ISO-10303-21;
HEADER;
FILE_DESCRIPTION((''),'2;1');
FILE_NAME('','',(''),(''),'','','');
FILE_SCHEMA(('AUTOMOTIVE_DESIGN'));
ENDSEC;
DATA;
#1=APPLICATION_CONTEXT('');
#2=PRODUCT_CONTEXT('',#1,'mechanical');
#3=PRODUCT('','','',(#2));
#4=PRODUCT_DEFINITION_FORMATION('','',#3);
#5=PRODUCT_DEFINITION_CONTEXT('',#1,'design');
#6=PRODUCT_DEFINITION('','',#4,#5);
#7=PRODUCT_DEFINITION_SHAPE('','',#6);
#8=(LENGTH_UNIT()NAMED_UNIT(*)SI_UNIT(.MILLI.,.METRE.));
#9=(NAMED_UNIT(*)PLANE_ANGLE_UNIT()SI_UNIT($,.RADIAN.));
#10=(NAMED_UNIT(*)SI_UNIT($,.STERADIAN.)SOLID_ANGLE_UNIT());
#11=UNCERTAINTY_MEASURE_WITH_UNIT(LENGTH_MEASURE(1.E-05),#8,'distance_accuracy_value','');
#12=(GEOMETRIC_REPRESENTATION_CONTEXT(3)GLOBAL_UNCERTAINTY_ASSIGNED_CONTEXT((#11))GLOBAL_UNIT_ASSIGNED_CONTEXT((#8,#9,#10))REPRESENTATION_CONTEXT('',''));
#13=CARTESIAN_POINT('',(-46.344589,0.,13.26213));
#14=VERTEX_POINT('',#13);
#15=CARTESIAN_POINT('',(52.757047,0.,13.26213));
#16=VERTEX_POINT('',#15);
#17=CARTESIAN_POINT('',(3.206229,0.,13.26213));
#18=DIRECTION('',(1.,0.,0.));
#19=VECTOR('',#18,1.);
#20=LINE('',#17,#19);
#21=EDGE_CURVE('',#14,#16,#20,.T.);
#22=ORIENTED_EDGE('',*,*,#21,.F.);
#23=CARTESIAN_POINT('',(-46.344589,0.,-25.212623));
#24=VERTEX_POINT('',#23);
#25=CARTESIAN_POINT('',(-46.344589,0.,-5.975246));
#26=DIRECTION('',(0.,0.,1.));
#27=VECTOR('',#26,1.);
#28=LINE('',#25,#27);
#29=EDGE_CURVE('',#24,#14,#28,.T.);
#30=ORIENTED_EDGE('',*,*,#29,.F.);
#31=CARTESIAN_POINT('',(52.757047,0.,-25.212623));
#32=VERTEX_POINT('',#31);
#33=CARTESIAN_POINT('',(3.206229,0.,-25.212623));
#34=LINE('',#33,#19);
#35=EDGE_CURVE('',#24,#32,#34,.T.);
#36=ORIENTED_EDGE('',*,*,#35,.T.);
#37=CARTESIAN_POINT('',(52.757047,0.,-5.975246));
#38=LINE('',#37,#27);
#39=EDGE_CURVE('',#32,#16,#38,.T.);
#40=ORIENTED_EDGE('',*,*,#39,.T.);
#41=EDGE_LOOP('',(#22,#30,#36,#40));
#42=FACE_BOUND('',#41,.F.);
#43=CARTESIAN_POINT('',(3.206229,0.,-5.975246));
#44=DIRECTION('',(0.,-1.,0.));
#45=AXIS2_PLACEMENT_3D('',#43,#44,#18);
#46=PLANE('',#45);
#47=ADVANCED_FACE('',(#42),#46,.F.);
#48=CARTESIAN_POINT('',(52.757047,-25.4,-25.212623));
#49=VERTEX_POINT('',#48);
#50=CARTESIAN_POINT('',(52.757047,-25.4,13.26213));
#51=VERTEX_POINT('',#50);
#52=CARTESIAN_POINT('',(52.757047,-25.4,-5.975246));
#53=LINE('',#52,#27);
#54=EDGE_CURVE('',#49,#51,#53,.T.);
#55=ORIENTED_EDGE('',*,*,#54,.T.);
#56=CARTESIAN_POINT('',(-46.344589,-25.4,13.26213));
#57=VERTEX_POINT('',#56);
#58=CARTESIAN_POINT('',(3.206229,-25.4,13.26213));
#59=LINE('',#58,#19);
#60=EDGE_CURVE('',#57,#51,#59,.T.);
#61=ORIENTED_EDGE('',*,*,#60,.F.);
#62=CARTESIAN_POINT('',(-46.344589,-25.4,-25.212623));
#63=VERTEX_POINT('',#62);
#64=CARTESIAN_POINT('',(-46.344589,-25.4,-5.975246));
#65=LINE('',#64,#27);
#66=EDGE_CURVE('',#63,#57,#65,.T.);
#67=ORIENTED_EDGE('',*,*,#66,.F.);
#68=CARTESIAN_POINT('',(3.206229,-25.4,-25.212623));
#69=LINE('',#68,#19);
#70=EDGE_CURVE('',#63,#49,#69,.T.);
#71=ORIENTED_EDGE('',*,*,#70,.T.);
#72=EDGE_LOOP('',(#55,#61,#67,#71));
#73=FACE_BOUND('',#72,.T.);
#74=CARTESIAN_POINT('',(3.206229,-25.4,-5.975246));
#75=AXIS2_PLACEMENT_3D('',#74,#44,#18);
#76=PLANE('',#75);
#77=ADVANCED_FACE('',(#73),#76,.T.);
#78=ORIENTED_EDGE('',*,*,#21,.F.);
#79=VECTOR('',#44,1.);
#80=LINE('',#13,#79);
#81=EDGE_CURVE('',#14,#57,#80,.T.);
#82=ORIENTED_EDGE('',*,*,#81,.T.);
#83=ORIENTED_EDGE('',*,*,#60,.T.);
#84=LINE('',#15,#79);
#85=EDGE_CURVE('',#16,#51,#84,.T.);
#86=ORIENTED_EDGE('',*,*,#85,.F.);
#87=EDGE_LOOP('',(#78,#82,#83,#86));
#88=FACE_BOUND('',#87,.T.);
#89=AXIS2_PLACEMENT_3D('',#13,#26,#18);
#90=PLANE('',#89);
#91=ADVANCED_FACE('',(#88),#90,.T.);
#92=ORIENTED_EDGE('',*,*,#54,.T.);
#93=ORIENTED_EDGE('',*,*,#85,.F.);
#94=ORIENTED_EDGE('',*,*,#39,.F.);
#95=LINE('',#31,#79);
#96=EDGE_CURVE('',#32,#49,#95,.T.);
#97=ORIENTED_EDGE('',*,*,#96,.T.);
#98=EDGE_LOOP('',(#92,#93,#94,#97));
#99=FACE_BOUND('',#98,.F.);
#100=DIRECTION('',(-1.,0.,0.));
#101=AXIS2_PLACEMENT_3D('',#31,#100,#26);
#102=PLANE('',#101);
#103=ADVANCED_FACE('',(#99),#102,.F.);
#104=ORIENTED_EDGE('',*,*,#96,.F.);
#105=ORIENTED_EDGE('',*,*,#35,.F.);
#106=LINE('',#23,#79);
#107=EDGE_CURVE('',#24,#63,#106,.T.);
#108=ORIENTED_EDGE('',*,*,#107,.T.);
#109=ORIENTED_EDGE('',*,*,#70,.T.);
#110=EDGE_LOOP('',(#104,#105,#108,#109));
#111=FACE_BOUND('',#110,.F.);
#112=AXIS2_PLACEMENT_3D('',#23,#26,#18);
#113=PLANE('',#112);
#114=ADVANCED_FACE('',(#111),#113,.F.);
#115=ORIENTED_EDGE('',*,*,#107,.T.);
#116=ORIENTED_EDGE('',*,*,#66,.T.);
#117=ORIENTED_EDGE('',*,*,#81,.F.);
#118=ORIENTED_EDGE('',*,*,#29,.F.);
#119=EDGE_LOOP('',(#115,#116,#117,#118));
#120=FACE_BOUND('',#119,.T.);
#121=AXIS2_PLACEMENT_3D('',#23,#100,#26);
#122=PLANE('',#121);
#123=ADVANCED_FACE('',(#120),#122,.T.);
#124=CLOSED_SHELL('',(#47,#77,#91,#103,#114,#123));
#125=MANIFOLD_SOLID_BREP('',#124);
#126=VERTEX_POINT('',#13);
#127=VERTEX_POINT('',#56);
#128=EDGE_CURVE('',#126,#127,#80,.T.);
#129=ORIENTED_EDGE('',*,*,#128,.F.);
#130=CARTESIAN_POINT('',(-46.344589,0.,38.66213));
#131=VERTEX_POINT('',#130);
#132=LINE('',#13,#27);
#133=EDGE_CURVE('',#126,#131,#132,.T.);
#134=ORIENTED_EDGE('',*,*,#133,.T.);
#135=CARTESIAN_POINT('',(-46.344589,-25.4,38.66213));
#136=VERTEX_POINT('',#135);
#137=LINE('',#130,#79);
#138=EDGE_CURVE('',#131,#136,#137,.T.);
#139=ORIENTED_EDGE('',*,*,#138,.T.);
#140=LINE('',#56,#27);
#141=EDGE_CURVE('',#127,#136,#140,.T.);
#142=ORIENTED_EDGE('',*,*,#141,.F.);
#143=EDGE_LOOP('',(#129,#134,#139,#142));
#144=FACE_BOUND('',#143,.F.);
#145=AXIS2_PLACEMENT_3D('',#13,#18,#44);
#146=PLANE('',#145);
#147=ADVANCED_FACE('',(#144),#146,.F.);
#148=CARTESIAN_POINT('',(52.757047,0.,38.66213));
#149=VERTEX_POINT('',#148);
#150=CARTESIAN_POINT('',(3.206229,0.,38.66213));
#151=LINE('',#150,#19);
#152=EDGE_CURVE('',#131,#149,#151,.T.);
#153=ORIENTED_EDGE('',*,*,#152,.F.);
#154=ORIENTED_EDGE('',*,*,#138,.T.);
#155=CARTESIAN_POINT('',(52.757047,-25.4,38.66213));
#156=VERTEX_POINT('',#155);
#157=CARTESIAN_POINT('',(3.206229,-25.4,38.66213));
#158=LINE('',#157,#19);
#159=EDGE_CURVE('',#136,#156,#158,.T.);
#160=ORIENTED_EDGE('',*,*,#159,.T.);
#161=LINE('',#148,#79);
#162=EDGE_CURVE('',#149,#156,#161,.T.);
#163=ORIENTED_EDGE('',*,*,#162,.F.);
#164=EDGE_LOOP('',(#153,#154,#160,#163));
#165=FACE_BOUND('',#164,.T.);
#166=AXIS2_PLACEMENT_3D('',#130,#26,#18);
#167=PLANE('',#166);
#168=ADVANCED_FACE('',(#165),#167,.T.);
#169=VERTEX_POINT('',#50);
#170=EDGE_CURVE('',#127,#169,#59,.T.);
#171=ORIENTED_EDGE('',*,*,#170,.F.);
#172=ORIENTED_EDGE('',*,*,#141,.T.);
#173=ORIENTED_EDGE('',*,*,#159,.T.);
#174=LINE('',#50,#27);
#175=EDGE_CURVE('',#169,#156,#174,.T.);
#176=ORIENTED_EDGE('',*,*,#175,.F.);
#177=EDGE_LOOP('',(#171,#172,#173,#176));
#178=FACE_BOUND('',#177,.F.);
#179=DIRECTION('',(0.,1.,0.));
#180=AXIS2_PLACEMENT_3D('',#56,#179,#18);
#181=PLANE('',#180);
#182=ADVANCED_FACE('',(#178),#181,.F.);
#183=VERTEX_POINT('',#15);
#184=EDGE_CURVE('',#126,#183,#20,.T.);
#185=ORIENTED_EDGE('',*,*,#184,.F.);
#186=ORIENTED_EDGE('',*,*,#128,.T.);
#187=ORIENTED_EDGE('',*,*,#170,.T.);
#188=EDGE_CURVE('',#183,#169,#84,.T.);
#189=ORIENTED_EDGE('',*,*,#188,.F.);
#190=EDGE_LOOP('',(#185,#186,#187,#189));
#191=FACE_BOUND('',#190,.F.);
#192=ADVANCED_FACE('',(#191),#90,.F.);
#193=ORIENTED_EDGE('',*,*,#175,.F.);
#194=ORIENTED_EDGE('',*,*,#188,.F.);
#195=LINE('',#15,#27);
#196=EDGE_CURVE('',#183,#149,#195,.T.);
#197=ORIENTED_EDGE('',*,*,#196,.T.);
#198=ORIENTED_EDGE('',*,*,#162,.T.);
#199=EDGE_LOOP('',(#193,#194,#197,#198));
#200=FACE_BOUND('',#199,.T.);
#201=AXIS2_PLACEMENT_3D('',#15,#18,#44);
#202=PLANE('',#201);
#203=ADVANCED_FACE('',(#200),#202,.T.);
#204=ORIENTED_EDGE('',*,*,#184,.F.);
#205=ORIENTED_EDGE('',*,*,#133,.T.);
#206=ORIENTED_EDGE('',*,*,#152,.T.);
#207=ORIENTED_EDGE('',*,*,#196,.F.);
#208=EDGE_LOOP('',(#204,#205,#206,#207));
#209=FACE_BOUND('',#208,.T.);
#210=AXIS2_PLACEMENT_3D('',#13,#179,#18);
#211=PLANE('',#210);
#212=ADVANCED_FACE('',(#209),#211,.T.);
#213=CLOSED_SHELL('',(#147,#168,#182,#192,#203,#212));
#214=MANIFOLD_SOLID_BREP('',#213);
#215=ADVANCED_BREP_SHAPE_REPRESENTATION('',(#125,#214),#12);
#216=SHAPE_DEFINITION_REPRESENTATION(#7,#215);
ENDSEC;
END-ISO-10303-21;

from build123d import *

# Parameters (mm, degrees)
F0_W     = 99.1016365588
F0_H     = 38.474753499
F1_DEPTH = 25.4
F2_DEPTH = 25.4


# Not quite as in the source:
# - a feature of the source that left no trace in its solid (it failed there, or was rolled back) is left out


with BuildPart() as f1:
    # F0 (on Front) → F1 (new body)
    with BuildSketch(Plane.XZ):
        with Locations((3.2062288374, -5.9752464294)):
            Rectangle(F0_W, F0_H)
    extrude(amount=F1_DEPTH)


with BuildPart() as f2:
    # F2 (new): a face of the model
    f2_faces = [f1.part.faces().sort_by_distance(p)[0] for p in [
        (3.2062288374, -12.7, 13.2621303201),
    ]]
    extrude(f2_faces, amount=F2_DEPTH)


solid = Compound([f1.part, f2.part])
